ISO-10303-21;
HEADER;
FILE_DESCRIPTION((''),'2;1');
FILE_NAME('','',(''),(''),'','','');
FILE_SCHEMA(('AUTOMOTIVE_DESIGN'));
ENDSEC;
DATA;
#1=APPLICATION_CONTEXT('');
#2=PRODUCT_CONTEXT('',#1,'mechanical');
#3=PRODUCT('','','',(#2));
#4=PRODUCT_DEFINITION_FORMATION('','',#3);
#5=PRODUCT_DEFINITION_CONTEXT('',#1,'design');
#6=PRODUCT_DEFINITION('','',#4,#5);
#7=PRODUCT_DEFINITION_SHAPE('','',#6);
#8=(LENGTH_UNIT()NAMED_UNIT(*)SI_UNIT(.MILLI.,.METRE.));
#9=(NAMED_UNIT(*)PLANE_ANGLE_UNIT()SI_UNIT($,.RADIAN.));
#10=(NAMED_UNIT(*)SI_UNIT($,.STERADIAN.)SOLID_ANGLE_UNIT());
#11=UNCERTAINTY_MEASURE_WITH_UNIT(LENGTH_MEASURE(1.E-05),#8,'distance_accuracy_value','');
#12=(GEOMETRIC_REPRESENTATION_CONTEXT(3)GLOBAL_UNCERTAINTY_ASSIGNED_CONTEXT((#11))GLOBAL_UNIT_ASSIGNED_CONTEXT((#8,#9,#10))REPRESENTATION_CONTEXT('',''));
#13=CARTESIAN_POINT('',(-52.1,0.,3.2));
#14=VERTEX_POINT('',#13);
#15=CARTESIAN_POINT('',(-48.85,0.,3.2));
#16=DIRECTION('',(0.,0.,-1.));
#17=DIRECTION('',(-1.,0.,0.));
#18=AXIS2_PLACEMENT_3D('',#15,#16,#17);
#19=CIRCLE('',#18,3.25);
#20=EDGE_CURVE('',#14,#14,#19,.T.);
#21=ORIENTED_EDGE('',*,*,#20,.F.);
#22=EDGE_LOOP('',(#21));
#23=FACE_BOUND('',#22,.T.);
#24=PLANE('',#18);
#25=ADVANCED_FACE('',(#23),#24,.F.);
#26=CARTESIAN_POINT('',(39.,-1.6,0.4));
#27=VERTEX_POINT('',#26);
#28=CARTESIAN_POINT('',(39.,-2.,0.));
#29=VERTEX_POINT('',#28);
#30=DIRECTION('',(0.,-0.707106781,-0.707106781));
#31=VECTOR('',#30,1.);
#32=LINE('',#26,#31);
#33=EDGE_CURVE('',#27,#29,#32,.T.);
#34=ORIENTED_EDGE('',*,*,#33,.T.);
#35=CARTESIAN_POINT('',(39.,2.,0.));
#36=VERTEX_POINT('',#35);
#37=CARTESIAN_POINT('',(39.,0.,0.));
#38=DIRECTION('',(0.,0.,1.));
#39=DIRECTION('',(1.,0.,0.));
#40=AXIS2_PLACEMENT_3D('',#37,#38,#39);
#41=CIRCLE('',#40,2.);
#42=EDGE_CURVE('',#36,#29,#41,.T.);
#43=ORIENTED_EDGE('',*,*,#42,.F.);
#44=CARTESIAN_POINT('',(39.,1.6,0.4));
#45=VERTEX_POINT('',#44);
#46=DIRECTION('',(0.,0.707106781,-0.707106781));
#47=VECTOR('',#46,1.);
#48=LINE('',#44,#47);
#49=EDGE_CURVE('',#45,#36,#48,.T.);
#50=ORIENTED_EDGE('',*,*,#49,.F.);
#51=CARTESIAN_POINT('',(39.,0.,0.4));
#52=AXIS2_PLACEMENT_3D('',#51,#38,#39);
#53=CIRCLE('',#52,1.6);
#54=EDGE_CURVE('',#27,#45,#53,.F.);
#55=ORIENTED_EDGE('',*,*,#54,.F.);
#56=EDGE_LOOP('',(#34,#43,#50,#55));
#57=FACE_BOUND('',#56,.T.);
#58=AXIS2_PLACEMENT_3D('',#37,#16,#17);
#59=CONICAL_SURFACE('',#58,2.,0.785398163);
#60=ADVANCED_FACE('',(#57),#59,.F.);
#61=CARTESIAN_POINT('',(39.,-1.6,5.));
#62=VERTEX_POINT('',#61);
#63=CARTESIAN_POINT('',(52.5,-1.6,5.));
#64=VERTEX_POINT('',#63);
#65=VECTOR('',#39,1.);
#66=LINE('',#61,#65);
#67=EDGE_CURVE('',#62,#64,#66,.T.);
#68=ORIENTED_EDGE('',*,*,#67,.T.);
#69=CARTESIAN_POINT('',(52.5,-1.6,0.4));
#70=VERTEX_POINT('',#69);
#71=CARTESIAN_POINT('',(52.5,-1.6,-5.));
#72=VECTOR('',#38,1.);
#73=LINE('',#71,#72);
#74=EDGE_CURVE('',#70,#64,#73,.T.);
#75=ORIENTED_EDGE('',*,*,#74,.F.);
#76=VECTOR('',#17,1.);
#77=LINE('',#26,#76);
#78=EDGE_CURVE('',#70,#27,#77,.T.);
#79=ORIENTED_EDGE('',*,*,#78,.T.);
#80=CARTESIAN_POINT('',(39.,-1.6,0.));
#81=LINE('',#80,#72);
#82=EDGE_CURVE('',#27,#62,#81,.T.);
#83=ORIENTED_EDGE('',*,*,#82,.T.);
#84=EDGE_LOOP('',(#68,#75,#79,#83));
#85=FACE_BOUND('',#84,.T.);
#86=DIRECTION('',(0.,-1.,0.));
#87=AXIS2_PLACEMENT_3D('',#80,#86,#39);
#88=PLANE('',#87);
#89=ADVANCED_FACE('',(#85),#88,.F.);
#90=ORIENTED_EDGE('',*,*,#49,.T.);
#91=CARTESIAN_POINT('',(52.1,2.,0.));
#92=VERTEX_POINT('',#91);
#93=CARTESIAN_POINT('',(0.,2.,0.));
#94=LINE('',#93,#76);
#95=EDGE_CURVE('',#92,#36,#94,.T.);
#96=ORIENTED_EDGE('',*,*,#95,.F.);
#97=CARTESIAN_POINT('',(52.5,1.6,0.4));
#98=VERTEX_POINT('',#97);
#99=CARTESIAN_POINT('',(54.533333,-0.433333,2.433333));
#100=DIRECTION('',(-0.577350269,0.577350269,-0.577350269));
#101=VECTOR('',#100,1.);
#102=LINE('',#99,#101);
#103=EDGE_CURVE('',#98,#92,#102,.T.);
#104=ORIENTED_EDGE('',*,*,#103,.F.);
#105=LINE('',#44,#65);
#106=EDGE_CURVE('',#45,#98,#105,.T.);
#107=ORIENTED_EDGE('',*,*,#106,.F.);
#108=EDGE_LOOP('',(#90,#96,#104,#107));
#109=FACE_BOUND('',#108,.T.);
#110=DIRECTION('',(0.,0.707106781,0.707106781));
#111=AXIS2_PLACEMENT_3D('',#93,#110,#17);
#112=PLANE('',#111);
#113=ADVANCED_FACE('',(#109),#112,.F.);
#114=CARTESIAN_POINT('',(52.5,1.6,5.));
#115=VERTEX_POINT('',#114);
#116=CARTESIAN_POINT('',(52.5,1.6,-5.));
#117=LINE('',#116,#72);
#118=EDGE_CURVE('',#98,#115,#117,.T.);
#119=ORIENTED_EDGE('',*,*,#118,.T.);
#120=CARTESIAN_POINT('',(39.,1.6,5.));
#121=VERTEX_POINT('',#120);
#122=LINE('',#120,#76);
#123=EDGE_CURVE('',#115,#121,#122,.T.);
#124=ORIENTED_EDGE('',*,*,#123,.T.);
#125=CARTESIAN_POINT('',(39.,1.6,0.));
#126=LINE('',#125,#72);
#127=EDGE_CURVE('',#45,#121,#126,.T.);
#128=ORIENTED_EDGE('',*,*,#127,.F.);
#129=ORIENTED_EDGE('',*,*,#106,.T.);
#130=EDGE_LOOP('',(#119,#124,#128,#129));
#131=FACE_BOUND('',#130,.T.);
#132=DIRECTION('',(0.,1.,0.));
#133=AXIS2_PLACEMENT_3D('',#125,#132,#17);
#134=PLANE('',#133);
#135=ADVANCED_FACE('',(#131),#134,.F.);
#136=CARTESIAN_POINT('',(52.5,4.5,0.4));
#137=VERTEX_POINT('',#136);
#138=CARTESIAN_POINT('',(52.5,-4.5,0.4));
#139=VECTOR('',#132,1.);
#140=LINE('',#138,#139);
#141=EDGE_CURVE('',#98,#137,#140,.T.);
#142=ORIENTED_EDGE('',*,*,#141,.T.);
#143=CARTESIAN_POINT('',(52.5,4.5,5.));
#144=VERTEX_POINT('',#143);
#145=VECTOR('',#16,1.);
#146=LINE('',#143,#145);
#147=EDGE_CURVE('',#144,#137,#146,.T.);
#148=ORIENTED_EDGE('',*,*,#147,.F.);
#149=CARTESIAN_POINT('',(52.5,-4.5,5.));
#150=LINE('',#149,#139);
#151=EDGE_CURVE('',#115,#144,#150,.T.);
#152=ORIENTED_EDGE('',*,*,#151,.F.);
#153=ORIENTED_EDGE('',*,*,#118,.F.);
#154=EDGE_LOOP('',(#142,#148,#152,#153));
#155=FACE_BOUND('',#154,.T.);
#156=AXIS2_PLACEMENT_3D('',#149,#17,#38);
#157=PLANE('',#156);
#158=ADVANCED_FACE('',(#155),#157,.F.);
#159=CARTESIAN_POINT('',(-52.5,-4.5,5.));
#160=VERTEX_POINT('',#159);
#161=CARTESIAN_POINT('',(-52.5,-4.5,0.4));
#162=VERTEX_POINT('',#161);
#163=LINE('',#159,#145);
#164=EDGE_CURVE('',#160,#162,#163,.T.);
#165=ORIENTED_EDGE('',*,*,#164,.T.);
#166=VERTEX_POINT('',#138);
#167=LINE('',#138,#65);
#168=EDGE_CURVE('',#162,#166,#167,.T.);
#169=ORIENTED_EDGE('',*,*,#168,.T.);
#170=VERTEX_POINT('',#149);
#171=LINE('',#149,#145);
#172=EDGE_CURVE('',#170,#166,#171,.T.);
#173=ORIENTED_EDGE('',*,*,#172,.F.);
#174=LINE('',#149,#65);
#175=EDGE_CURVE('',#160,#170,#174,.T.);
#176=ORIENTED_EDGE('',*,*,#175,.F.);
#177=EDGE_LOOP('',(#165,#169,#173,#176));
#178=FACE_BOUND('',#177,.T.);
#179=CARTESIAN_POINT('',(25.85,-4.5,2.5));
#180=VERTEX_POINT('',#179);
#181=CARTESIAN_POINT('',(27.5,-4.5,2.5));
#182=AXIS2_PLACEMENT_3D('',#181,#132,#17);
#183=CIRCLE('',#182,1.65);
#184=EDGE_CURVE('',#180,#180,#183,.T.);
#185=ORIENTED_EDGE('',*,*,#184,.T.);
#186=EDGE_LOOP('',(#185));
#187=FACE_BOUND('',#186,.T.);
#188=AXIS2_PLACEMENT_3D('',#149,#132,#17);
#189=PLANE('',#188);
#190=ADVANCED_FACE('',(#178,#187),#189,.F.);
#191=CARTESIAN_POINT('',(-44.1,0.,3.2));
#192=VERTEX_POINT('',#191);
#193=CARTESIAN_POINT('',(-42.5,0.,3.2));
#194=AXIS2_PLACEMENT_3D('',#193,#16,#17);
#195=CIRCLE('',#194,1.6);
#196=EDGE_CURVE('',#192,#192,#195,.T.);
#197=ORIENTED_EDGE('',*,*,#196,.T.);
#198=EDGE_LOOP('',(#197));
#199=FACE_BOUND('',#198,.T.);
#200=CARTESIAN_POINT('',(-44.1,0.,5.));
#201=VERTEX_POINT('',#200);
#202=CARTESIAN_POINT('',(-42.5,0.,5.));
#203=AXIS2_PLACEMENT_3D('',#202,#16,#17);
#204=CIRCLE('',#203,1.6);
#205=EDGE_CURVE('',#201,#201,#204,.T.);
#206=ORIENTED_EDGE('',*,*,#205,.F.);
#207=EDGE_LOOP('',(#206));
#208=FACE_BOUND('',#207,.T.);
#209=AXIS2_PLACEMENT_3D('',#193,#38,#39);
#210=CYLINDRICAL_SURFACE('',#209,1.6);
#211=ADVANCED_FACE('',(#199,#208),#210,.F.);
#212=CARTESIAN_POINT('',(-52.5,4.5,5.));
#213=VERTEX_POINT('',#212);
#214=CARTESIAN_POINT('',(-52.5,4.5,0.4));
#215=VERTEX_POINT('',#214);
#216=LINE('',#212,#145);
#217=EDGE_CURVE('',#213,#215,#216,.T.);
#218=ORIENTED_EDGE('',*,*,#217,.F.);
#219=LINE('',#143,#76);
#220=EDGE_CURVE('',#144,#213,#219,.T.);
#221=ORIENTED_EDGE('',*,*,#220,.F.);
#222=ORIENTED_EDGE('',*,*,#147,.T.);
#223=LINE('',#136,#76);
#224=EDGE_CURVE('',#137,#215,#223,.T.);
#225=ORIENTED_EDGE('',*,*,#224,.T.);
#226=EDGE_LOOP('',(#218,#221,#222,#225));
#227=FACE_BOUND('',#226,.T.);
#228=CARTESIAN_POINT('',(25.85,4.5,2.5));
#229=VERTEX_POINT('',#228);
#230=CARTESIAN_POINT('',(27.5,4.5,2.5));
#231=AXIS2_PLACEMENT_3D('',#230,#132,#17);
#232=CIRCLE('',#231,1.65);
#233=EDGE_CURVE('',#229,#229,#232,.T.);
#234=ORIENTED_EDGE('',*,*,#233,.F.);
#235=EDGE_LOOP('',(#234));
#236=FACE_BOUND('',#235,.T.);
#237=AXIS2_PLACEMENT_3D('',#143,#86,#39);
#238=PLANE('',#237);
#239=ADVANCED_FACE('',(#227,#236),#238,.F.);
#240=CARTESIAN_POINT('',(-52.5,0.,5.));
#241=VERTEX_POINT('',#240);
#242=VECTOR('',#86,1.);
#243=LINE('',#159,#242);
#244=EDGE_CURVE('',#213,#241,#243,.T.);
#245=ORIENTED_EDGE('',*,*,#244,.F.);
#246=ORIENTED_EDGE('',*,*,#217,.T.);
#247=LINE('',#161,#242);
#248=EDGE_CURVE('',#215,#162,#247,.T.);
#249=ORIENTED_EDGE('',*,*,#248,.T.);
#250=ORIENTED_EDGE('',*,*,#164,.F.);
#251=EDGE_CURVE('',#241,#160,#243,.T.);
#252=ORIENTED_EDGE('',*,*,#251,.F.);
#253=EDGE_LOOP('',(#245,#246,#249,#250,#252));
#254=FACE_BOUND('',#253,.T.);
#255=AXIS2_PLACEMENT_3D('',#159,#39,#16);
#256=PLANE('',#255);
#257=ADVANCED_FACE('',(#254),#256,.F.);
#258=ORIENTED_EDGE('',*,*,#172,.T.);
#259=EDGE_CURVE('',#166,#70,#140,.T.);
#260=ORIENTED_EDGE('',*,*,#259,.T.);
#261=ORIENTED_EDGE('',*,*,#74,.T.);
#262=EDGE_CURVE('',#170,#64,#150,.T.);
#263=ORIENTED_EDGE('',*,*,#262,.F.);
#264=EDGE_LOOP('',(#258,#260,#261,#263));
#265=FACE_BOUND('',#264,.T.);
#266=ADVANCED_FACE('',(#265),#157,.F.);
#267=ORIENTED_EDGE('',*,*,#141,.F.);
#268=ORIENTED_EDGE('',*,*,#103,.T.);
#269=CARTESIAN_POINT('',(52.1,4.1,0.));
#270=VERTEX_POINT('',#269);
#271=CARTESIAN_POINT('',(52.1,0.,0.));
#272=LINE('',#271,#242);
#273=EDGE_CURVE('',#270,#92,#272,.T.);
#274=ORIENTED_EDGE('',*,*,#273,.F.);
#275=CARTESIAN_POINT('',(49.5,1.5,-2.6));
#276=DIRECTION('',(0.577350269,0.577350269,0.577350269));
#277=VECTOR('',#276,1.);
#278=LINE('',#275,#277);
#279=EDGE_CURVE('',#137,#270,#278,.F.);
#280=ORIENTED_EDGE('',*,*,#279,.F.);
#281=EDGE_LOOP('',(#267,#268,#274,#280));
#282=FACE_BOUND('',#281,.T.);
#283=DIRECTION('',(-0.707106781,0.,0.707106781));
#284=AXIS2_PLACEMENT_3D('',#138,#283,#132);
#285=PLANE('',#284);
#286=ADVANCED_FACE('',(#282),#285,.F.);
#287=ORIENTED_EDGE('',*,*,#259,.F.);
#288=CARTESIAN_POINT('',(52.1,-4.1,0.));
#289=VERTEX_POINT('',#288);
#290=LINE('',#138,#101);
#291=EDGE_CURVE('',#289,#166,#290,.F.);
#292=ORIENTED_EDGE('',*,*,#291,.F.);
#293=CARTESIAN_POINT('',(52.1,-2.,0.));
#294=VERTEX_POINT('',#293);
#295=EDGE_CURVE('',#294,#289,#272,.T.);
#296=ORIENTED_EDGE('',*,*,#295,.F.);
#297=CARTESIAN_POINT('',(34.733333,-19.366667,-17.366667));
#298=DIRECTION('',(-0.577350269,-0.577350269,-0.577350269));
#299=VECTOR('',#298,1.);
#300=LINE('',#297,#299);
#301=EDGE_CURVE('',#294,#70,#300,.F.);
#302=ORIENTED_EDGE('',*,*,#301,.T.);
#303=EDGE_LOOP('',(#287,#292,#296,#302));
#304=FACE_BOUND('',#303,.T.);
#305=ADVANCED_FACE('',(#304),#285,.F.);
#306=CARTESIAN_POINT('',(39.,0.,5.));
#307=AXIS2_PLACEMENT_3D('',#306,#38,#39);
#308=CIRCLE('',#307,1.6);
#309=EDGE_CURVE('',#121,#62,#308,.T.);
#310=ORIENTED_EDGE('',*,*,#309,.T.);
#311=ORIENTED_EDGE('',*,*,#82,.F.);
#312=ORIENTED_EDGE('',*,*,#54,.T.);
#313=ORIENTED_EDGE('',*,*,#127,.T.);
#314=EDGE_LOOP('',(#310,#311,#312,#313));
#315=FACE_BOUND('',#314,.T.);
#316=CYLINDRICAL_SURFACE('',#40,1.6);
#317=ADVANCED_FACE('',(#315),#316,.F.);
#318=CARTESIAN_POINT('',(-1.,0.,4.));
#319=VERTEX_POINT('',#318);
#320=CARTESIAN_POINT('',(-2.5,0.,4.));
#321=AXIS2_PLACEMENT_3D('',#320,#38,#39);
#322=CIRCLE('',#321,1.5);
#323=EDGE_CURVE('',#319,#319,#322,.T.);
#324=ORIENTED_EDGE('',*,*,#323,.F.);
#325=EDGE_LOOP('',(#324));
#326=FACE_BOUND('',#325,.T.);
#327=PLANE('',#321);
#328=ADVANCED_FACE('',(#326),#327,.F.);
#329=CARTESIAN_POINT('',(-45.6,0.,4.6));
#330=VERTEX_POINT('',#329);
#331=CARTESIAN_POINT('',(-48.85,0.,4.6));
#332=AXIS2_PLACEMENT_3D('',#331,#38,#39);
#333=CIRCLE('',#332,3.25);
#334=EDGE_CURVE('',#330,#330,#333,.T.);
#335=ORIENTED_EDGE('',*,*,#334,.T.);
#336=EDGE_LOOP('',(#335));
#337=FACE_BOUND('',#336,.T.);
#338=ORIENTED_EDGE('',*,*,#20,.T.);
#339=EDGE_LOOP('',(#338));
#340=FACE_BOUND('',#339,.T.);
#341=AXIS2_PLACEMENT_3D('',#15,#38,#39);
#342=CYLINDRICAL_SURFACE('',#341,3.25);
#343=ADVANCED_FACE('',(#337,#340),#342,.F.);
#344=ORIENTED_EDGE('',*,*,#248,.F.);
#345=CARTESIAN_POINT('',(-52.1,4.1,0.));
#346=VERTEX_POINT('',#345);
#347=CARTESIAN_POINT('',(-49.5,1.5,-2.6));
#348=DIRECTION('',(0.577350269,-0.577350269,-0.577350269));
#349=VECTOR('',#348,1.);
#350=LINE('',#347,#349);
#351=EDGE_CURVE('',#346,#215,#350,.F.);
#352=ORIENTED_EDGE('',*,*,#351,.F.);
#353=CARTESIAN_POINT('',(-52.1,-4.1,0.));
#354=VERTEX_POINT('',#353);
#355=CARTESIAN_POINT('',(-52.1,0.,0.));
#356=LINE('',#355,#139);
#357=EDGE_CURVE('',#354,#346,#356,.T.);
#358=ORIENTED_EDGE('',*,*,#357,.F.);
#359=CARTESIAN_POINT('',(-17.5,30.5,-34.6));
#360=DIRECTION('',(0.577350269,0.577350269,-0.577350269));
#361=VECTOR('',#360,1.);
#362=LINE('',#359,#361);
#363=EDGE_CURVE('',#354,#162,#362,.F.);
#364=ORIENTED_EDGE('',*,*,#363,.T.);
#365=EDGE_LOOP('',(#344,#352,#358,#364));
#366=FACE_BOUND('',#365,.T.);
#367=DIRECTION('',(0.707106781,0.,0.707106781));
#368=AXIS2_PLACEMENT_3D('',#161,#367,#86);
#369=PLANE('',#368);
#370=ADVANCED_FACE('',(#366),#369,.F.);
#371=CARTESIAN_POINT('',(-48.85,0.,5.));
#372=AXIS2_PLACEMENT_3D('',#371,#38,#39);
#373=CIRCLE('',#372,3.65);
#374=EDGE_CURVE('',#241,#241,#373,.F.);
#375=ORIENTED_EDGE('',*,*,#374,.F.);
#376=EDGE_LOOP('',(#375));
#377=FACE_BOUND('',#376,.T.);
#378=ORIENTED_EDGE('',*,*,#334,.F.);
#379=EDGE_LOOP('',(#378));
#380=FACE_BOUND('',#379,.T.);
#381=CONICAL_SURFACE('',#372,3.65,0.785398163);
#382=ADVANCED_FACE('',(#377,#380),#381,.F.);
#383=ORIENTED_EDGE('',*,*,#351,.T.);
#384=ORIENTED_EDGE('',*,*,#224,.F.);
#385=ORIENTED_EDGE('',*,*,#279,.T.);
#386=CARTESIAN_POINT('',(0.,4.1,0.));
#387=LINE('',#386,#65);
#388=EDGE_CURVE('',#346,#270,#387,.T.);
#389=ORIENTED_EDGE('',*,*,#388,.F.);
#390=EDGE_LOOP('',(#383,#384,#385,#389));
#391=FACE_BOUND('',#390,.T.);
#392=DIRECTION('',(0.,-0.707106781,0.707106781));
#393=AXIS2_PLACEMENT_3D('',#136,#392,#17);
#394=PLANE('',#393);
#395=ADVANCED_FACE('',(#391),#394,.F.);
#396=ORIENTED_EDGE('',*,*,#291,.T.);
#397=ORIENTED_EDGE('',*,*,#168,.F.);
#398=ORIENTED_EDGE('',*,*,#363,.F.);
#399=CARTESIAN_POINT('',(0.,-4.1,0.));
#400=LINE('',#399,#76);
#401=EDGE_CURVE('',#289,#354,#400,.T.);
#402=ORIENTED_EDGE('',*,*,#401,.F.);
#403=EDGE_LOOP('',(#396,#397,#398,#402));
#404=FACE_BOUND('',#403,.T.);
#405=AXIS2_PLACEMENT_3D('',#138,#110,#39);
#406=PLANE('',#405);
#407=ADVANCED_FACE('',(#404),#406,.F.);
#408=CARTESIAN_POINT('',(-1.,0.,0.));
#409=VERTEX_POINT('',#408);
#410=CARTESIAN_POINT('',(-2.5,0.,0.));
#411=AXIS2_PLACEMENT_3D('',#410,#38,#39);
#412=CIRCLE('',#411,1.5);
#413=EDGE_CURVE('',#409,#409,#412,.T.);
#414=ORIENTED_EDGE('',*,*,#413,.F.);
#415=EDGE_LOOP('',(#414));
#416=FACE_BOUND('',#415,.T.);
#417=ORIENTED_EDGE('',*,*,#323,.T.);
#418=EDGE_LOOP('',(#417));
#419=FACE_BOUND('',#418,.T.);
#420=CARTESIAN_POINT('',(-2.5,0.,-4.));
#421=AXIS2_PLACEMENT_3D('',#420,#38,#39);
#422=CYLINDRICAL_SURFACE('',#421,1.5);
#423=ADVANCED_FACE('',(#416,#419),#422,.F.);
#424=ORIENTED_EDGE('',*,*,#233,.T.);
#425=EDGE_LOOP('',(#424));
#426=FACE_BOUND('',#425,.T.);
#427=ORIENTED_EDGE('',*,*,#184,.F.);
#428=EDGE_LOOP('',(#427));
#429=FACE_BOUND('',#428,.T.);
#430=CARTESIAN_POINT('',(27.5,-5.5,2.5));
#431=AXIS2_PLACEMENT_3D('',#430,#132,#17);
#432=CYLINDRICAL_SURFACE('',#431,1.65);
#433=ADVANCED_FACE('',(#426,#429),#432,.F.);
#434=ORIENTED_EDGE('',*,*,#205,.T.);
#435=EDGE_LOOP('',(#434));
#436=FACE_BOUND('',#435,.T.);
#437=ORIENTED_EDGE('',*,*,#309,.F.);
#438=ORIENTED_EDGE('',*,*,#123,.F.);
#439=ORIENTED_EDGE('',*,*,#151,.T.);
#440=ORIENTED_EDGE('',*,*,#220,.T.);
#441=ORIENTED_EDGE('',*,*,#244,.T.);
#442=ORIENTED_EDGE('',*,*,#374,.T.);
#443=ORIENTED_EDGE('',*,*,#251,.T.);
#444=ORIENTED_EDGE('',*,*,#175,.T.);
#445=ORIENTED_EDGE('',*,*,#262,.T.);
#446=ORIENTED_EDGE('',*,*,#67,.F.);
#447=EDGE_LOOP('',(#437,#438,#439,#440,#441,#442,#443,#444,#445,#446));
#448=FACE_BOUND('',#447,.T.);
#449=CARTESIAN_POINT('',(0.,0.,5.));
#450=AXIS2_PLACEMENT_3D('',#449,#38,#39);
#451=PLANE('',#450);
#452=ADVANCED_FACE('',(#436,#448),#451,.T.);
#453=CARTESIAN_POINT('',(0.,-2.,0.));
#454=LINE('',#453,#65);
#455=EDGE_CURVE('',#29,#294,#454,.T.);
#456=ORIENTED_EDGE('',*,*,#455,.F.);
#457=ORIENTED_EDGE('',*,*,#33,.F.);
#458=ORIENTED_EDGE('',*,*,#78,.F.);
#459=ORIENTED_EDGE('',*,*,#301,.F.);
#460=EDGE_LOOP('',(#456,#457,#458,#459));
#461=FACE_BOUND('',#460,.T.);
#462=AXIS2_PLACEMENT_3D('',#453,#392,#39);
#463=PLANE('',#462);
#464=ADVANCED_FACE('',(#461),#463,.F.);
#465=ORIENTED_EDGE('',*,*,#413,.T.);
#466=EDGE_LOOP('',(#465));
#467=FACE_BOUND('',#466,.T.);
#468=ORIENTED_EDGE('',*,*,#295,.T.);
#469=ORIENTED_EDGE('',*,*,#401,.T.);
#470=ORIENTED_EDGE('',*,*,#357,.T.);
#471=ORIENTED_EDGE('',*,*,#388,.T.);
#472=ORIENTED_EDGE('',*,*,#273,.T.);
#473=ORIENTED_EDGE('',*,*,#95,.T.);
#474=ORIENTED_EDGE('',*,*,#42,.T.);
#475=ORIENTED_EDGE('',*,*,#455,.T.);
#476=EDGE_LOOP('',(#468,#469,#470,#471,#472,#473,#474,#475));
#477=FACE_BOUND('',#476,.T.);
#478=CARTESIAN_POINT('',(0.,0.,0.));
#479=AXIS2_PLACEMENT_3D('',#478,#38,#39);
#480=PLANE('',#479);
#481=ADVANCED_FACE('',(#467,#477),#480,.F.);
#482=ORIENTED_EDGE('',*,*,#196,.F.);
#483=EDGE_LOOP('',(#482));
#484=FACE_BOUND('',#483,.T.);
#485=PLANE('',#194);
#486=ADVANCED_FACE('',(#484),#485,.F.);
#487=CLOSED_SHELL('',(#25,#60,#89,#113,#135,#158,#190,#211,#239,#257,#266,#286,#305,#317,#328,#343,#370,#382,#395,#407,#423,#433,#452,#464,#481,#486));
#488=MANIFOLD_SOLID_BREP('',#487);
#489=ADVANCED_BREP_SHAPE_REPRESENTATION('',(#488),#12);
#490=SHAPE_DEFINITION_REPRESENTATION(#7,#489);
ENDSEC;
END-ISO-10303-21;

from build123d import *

# Parameters (mm, degrees)
SKETCH1_W           = 105
SKETCH1_H           = 9
BOSS_EXTRUDE1_DEPTH = 5
CUT_EXTRUDE1_DEPTH  = 5
SKETCH8_W           = 8
SKETCH8_H           = 3.2
CUT_EXTRUDE4_DEPTH  = 10
SKETCH7_R           = 3.25
SKETCH7_R_2         = 1.6
CUT_EXTRUDE2_DEPTH  = 1.8
CHAMFER1_SIZE       = 0.4
CHAMFER2_SIZE       = 0.4
SKETCH2_R           = 1.65
CUT_EXTRUDE3_DEPTH  = 10
SKETCH10_R          = 1.5
CUT_EXTRUDE5_DEPTH  = 4


with BuildPart() as part:
    # Sketch1 → Boss-Extrude1 (new body)
    with BuildSketch(Plane.XY):
        Rectangle(SKETCH1_W, SKETCH1_H)
    extrude(amount=BOSS_EXTRUDE1_DEPTH)

    # Sketch4 → Cut-Extrude1 (cut)
    with BuildSketch(Plane.XY.offset(5)):
        with BuildLine():
            Line((39, 1.6), (45, 1.6))
            ThreePointArc((45, 1.6), (46.6, 0), (45, -1.6))
            Line((45, -1.6), (39, -1.6))
            ThreePointArc((39, -1.6), (37.4, 0), (39, 1.6))
        make_face()
    extrude(amount=-CUT_EXTRUDE1_DEPTH, mode=Mode.SUBTRACT)

    # Sketch8 → Cut-Extrude4 (cut)
    with BuildSketch(Plane.XY.offset(5)):
        with Locations((48.5, 0)):
            Rectangle(SKETCH8_W, SKETCH8_H)
    extrude(amount=-CUT_EXTRUDE4_DEPTH, mode=Mode.SUBTRACT)

    # Sketch7 → Cut-Extrude2 (cut)
    with BuildSketch(Plane(origin=(0, 0, 5), x_dir=(-1, 0, 0), z_dir=(0, 0, -1))):
        with Locations((48.85, 0)):
            Circle(SKETCH7_R)
        with Locations((42.5, 0)):
            Circle(SKETCH7_R_2)
    extrude(amount=CUT_EXTRUDE2_DEPTH, mode=Mode.SUBTRACT)

    # Chamfer1
    chamfer1_edges = [part.edges().sort_by_distance(p)[0] for p in [
        (-45.6, 0, 5),
    ]]
    chamfer(chamfer1_edges, length=CHAMFER1_SIZE - 0.0001)  # a hair under: the kernel refuses the full size

    # Chamfer2
    chamfer2_edges = [part.edges().sort_by_distance(p)[0] for p in [
        (37.4, 0, 0),
        (45.75, 1.6, 0),
        (45.75, -1.6, 0),
        (52.5, 3.05, 0),
        (0, 4.5, 0),
        (52.5, -3.05, 0),
        (0, -4.5, 0),
        (-52.5, 0, 0),
    ]]
    chamfer(chamfer2_edges, length=CHAMFER2_SIZE)

    # Sketch2 → Cut-Extrude3 (cut)
    with BuildSketch(Plane(origin=(0, 4.5, 0), x_dir=(1, 0, 0), z_dir=(0, 1, 0))):
        with Locations(Location((27.5, -2.5, 0), (0, 0, 180))):
            Circle(SKETCH2_R)
    extrude(amount=-CUT_EXTRUDE3_DEPTH, mode=Mode.SUBTRACT)

    # Sketch10 → Cut-Extrude5 (cut, symmetric)
    with BuildSketch(Plane.XY):
        with Locations((-2.5, 0)):
            Circle(SKETCH10_R)
    extrude(amount=CUT_EXTRUDE5_DEPTH, both=True, mode=Mode.SUBTRACT)


solid = part.part
